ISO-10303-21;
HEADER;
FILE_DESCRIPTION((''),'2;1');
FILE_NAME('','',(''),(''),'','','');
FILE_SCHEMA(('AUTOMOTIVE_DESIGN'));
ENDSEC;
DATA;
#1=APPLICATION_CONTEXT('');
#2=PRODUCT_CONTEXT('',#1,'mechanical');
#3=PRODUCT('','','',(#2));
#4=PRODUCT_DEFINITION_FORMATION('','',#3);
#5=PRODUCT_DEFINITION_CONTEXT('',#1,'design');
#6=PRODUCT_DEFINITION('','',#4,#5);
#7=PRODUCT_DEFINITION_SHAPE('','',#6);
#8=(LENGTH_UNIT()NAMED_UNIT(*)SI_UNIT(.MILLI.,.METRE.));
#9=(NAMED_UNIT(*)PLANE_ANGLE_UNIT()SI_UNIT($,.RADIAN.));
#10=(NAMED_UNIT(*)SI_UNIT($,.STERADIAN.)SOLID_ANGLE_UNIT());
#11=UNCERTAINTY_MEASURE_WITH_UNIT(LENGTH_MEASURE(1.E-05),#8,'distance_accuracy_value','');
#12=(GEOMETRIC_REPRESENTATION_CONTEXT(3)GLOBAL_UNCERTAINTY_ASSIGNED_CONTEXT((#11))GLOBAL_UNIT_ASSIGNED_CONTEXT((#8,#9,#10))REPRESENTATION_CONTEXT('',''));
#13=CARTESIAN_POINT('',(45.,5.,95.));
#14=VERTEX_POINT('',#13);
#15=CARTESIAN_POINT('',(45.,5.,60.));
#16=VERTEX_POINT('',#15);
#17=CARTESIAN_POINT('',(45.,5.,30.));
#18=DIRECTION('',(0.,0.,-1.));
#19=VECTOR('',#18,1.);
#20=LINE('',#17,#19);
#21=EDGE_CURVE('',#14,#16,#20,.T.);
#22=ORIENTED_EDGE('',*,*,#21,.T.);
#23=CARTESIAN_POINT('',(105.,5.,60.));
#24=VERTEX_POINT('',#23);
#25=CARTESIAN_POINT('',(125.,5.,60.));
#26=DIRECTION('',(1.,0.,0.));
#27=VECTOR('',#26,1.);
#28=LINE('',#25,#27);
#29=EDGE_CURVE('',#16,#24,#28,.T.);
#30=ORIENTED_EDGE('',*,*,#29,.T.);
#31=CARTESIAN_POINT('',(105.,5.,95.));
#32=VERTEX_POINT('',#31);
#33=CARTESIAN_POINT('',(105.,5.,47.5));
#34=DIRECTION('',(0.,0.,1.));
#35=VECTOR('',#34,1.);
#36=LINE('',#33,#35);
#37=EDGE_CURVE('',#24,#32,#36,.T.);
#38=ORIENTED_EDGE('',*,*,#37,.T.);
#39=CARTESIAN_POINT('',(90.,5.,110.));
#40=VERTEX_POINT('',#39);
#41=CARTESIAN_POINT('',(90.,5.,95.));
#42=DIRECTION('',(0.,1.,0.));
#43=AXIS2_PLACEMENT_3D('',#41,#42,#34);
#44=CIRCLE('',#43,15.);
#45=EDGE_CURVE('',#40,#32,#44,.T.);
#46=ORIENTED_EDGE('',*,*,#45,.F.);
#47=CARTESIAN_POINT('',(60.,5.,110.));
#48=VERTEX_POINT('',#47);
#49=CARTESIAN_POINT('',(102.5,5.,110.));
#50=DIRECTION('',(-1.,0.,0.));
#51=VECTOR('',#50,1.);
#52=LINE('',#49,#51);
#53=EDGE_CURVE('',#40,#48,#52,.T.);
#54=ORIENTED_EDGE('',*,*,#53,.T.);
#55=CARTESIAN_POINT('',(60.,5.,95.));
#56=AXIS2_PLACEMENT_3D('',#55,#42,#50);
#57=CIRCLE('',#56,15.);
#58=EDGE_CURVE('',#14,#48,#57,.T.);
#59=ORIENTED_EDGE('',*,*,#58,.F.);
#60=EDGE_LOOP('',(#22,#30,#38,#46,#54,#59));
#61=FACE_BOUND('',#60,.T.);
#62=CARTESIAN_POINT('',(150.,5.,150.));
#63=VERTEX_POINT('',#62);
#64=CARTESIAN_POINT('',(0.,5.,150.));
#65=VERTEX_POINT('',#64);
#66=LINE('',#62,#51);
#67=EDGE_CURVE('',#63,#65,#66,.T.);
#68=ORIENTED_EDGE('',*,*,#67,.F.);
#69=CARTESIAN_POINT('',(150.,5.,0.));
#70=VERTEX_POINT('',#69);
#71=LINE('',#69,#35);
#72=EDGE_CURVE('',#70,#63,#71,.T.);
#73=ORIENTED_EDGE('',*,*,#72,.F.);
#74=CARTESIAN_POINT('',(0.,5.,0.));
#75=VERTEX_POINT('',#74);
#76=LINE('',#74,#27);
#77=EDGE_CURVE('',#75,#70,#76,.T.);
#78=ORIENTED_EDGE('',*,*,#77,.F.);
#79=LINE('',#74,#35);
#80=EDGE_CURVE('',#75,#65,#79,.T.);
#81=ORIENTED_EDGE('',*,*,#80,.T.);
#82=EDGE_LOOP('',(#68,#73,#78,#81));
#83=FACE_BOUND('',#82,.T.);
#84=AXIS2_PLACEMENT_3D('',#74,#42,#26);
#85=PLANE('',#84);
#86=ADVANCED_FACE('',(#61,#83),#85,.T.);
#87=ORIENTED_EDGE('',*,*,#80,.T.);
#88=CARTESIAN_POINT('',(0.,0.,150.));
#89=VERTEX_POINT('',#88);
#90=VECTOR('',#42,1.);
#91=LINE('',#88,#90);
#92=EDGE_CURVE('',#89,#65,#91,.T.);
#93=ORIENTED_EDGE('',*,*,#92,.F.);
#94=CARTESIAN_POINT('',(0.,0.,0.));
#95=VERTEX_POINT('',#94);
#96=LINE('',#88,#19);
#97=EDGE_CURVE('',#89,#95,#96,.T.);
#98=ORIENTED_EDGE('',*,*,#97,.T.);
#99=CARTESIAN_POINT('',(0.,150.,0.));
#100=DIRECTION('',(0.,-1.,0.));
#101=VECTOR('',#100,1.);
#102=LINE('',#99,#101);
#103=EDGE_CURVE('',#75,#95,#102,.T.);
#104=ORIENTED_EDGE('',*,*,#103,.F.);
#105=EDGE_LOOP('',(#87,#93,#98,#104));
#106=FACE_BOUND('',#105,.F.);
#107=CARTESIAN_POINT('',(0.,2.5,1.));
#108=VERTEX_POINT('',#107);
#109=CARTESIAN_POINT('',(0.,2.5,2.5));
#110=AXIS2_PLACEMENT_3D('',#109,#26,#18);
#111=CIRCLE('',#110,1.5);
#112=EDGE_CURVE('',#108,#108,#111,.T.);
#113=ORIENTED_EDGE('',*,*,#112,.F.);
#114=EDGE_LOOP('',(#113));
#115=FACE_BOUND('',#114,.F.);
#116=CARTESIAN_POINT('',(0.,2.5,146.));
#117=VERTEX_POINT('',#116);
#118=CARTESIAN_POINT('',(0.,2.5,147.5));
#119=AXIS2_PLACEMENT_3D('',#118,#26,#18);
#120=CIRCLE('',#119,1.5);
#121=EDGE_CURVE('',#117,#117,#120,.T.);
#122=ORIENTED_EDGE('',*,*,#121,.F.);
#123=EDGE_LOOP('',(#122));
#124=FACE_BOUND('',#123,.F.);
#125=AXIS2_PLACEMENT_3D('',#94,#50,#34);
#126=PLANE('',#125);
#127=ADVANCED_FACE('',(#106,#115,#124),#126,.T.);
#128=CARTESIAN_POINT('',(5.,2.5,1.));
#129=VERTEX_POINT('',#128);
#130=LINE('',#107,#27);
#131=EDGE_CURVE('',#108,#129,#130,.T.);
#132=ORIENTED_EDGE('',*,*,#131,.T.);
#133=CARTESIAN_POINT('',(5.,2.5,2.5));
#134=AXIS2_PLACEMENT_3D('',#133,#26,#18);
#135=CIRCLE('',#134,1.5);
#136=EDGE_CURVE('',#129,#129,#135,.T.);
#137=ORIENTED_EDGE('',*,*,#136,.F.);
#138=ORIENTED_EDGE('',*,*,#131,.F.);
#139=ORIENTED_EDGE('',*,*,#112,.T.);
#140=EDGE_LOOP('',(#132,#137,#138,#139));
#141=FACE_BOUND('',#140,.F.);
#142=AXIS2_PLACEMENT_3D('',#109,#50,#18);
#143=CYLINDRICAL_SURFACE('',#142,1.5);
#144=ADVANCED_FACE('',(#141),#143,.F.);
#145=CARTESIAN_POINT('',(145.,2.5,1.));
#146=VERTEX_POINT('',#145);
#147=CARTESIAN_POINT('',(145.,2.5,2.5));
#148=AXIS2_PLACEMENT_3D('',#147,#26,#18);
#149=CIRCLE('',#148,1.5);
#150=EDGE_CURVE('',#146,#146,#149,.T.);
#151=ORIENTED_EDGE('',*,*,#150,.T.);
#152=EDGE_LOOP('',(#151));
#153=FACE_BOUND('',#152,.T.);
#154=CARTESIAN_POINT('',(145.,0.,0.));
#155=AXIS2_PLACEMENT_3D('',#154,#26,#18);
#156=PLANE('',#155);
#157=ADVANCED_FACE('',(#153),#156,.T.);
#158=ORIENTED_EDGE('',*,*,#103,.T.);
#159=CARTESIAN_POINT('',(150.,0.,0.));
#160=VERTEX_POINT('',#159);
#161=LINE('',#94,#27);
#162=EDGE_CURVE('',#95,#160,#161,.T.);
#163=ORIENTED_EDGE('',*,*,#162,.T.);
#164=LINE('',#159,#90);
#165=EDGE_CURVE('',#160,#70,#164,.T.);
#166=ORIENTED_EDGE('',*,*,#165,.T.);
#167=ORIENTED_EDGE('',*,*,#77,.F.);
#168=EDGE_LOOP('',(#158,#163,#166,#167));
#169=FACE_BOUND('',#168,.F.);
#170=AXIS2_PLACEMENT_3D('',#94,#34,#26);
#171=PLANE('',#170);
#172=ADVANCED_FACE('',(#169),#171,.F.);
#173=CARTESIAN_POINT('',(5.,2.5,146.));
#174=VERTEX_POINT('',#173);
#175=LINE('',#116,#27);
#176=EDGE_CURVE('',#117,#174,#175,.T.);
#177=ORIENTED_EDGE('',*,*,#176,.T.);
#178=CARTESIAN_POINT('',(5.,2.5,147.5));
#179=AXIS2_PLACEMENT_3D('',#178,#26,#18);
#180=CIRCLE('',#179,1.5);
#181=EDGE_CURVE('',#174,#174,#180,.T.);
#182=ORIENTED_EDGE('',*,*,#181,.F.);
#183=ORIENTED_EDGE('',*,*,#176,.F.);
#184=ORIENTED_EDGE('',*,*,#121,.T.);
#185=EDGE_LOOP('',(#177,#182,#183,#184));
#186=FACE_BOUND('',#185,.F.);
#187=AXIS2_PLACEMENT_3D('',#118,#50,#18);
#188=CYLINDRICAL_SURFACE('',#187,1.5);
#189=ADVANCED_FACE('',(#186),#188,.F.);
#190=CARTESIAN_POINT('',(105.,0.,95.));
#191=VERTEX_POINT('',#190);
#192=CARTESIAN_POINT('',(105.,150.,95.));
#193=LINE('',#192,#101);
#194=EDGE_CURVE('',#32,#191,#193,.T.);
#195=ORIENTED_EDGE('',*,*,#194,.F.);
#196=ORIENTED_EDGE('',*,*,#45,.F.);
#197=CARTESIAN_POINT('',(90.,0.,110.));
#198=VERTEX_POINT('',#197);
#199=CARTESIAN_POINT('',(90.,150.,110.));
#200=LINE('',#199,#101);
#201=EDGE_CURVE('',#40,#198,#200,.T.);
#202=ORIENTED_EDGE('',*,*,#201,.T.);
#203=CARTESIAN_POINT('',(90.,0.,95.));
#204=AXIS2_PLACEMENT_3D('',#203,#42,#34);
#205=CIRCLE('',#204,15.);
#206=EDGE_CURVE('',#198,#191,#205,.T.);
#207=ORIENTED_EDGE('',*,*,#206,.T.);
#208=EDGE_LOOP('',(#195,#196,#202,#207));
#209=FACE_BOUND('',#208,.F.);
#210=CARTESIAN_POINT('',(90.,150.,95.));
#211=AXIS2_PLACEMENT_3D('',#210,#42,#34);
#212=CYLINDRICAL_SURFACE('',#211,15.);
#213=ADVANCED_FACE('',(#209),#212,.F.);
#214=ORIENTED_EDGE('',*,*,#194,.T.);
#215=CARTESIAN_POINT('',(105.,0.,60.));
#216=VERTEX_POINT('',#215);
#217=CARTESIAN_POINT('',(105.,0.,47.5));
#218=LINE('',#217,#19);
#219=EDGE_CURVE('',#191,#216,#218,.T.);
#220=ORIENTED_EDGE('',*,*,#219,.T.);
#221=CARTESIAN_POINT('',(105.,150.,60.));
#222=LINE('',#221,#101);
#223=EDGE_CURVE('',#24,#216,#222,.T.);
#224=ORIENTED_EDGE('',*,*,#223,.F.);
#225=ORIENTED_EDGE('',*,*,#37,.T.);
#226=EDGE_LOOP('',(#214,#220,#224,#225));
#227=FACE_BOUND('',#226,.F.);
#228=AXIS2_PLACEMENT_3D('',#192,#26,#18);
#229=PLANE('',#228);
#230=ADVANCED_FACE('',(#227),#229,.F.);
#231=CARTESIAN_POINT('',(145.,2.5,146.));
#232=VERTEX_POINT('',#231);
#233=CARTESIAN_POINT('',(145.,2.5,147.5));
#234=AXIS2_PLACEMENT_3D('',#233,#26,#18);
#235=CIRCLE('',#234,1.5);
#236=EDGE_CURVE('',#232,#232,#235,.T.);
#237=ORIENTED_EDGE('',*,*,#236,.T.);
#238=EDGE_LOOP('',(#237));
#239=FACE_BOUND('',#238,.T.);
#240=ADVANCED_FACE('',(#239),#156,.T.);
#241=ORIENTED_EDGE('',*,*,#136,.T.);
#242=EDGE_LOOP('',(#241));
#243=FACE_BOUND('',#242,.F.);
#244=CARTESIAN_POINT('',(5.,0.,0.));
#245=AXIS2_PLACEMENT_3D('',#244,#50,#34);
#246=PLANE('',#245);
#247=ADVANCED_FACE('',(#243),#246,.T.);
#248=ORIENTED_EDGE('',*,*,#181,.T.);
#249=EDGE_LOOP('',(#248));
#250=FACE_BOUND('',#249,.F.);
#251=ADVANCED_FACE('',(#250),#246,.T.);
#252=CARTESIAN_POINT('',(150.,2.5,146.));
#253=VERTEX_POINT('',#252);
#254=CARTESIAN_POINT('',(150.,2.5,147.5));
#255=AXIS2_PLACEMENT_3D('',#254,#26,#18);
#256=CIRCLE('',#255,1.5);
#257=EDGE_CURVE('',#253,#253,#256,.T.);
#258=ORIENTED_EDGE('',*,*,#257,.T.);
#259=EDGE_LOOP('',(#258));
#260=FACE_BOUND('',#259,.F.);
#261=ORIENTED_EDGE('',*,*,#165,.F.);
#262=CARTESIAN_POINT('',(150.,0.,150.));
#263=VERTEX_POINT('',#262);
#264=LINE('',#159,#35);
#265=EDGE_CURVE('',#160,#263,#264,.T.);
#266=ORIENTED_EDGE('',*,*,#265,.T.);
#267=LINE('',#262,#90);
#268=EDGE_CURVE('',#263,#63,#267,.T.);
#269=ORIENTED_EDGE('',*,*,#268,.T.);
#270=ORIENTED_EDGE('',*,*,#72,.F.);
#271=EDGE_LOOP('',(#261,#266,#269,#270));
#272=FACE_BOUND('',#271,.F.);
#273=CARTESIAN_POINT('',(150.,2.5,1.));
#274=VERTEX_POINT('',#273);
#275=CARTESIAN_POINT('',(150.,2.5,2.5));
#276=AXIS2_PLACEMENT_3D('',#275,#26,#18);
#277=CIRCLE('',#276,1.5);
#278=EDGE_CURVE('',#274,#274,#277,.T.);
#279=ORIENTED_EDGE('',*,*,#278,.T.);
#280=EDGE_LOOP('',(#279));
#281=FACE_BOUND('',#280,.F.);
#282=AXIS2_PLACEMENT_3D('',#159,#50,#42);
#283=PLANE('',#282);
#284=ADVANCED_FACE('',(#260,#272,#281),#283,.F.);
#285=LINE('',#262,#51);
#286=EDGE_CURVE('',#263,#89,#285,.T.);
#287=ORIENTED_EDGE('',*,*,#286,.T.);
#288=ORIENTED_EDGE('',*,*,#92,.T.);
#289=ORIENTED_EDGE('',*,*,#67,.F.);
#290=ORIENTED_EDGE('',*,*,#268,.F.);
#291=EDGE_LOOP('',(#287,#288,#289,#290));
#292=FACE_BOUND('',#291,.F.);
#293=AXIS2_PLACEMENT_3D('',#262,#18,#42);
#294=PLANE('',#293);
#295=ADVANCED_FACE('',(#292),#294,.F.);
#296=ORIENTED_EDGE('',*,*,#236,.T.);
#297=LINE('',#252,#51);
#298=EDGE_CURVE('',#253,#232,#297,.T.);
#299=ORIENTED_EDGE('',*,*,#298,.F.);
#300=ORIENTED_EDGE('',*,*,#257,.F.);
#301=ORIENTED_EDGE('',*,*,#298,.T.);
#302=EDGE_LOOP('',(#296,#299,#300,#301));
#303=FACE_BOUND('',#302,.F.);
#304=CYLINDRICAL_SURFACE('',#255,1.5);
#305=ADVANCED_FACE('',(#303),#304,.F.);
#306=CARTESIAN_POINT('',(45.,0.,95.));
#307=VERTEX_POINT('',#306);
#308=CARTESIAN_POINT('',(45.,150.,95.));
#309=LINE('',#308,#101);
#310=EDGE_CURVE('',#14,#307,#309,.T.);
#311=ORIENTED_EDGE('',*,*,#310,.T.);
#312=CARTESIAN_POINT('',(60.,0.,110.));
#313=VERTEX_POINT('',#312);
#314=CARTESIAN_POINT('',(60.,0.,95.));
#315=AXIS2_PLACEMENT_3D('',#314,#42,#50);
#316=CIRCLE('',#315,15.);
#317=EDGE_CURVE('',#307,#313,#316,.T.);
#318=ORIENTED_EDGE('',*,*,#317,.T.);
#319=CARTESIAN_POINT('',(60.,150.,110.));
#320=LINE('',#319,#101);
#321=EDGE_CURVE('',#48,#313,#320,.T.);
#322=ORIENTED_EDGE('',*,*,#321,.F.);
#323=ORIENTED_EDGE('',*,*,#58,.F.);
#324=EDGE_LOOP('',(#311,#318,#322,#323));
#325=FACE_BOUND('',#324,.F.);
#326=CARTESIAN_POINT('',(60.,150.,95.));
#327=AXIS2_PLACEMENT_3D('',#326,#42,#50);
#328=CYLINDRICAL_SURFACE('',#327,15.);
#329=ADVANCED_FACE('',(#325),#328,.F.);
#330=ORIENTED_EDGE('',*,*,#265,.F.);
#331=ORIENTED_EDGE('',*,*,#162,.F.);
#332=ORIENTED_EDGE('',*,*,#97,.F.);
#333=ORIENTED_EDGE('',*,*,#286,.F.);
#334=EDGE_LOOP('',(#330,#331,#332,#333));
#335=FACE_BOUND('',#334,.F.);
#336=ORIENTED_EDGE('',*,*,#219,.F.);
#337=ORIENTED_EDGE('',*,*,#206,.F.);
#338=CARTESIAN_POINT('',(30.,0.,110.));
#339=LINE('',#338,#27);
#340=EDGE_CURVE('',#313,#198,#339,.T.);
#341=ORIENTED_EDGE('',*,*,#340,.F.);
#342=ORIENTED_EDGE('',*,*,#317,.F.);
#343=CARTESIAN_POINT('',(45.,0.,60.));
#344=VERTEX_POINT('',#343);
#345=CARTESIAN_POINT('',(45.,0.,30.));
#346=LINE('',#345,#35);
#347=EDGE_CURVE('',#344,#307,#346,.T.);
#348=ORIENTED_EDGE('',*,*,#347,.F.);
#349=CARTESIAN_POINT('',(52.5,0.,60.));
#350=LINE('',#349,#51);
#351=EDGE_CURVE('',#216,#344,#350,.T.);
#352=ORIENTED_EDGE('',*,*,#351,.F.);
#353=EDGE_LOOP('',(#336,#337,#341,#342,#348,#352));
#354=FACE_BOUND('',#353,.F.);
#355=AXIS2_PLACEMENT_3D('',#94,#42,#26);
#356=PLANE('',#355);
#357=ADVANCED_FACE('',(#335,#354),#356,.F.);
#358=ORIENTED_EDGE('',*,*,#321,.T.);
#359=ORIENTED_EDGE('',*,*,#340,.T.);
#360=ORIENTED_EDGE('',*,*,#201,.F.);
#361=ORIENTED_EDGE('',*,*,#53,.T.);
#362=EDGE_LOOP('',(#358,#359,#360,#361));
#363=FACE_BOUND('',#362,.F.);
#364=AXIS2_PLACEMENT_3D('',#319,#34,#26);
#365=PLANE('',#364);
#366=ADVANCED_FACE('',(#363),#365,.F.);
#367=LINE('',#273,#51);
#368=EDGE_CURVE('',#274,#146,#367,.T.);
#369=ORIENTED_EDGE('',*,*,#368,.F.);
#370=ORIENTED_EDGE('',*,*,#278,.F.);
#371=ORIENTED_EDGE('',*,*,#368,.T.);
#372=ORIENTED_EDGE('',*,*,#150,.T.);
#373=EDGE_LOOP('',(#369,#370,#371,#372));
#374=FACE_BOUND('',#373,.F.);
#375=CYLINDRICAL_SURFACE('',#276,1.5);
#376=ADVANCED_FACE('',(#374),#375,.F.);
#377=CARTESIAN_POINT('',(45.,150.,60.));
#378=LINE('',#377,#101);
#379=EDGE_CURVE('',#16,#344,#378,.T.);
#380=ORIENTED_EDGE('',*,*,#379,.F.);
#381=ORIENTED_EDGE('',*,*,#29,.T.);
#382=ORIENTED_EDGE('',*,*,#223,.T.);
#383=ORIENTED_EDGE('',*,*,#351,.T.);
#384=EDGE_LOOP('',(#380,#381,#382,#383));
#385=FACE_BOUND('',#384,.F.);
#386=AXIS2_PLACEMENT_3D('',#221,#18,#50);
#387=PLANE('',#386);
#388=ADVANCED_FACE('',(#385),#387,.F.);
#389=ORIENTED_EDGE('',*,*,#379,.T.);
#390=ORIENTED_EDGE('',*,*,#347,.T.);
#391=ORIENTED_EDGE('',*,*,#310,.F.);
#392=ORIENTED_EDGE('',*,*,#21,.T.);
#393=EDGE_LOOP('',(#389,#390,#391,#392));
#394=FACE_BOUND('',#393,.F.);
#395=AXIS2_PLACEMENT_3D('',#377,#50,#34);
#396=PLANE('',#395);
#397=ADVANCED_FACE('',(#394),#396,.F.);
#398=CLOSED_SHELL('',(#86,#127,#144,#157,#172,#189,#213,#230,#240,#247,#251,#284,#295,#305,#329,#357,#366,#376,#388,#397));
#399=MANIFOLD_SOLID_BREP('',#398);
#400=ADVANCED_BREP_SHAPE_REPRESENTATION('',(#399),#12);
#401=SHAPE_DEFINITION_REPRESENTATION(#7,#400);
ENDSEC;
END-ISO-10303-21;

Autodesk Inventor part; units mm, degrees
sketch "Boceto1" plane through (0, 0, 0) normal (0, 0, 1) x (1, 0, 0)
  line L0 (0, 0) -> (150, 0)
  line L1 (150, 0) -> (150, 150)
  line L2 (150, 150) -> (0, 150)
  line L3 (0, 150) -> (0, 0)
  line L4 (5, 145) -> (145, 145)
  line L5 (145, 145) -> (145, 5)
  line L6 (145, 5) -> (5, 5)
  line L7 (5, 5) -> (5, 145)
  dimension "d0" = 150
  dimension "d1" = 150
  dimension "d2" = 5
extrude "Extrusión1" add sketch "Boceto1" along normal blind 150
sketch "Boceto2" plane through (150, 0, 0) normal (1, 0, 0) x (0, 0, -1)
  line L0 (-150, 0) -> (-150, 150) projected
  line L1 (-150, 75) -> (-190, 75) construction
  line L2 (-190, 75) -> (-150, 150)
  line L3 (0, 0) -> (-150, 0) construction
  line L4 (-150, 0) -> (-190, 75)
  dimension "d5" = 40
extrude "Extrusión2" add sketch "Boceto2" against normal blind 5
ref_plane "Plano de trabajo1" through (75, 0, 0) normal (1, 0, 0) x (0, 0, -1)
mirror "Simetría1" about plane through (75, 0, 0) normal (1, 0, 0) of "Extrusión2"
sketch "Boceto3" plane through (0, 150, 0) normal (0, 1, 0) x (1, 0, 0)
  line L0 (105, -60) -> (45, -60)
  line L1 (45, -60) -> (45, -95)
  line L2 (60, -110) -> (90, -110)
  line L3 (105, -95) -> (105, -60)
  line L4 (150, 0) -> (0, 0) projected
  line L5 (145, -150) -> (5, -150) projected
  arc A0 (90, -110) -> (105, -95) centre (90, -95) ccw
  arc A1 (45, -95) -> (60, -110) centre (60, -95) ccw
  point P0 (45, -110)
  point P1 (105, -110)
  point P2 (75, -60)
  point P3 (75, 0)
  dimension "d8" = 60
  dimension "d9" = 50
  dimension "d10" = 40
  dimension "d11" = 15
extrude "Extrusión3" cut sketch "Boceto3" against normal through all
sketch "Boceto4" plane through (150, 0, 0) normal (1, 0, 0) x (0, 0, -1)
  line L0 (-13, 20) -> (-123, 20)
  line L1 (-128, 25) -> (-128, 75)
  line L2 (-123, 80) -> (-13, 80)
  line L3 (-8, 75) -> (-8, 25)
  line L4 (0, 0) -> (0, 150) projected
  line L5 (0, 0) -> (-150, 0) projected
  arc A0 (-123, 80) -> (-128, 75) centre (-123, 75) ccw
  arc A1 (-8, 75) -> (-13, 80) centre (-13, 75) ccw
  arc A2 (-13, 20) -> (-8, 25) centre (-13, 25) ccw
  arc A3 (-128, 25) -> (-123, 20) centre (-123, 25) ccw
  point P0 (-128, 80)
  point P1 (-128, 20)
  point P2 (-8, 80)
  dimension "d14" = 120
  dimension "d15" = 60
  dimension "d16" = 8
  dimension "d17" = 20
  dimension "d18" = 5
extrude "Extrusión4" cut sketch "Boceto4" against normal up to surface (5 mm away)
sketch "Boceto5" plane through (0, 0, 0) normal (-1, 0, 0) x (0, 0, 1)
  line L0 (65, 125) -> (115, 125)
  line L1 (120, 120) -> (120, 30)
  line L2 (115, 25) -> (65, 25)
  line L3 (60, 30) -> (60, 120)
  line L4 (0, 150) -> (0, 0) projected
  arc A0 (120, 120) -> (115, 125) centre (115, 120) ccw
  arc A1 (115, 25) -> (120, 30) centre (115, 30) ccw
  arc A2 (65, 125) -> (60, 120) centre (65, 120) ccw
  arc A3 (60, 30) -> (65, 25) centre (65, 30) ccw
  point P0 (60, 150)
  point P1 (120, 25)
  point P2 (120, 125)
  point P3 (60, 25)
  point P4 (60, 75)
  point P5 (0, 75)
  dimension "d21" = 60
  dimension "d22" = 100
  dimension "d23" = 60
  dimension "d24" = 5
extrude "Extrusión5" cut sketch "Boceto5" against normal blind 10
sketch "Boceto6" plane through (150, 0, 0) normal (1, 0, 0) x (0, 0, -1)
  line L0 (-190, 75) -> (-150, 0) projected
  line L1 (-150, 150) -> (-190, 75) projected
  line L2 (-154.4118, 152.3529) -> (-195.6667, 75)
  line L3 (-195.6667, 75) -> (-154.4118, -2.3529)
  line L4 (-154.4118, 152.3529) -> (-144.4118, 152.3529)
  line L5 (-144.4118, 152.3529) -> (-144.4118, 150)
  line L6 (-154.4118, -2.3529) -> (-144.4118, -2.3529)
  line L7 (-144.4118, -2.3529) -> (-144.4118, 0)
  line L8 (0, 0) -> (-150, 0) projected
  line L9 (0, 150) -> (-150, 150) projected
  dimension "d27" = 5
  dimension "d28" = 10
extrude "Extrusión6" add sketch "Boceto6" along normal blind 10 and the other way blind 160
fillet "Empalme1" radius 5 3 edges at (75, 152.3529, 154.4118) (75, 75, 195.6667) (75, -2.3529, 154.4118)
sketch "Boceto7" plane through (150, 25, 8) normal (0, 0, 1) x (1, 0, 0)
  circle A0 centre (-2.5, 2.5) radius 1.25
  line L0 (0, 50) -> (0, 0) projected
  line L1 (0, 0) -> (-5, 0) projected
  point P0 (-150, -25)
  point P1 (-2.5, 0)
  dimension "d34" = 2.5
  dimension "d35" = 2.5
  dimension "d36" = 2.5
extrude "Extrusión7" cut sketch "Boceto7" against normal blind 3
ref_plane "Plano de trabajo2" through (150, 25, 68) normal (0, 0, 1) x (1, 0, 0)
mirror "Simetría2" about plane through (150, 25, 68) normal (0, 0, 1) of "Extrusión7"
sketch "Boceto8" plane through (160, 0, 0) normal (1, 0, 0) x (0, 0, -1)
  arc A0 (-155.8235, 0.2941) -> (-151.4118, -2.3529) centre (-151.4118, 2.6471) ccw projected
  line L0 (-151.4118, -2.3529) -> (-144.4118, -2.3529) projected
  line L1 (-144.4118, -2.3529) -> (-144.4118, 0) projected
  line L2 (-144.4118, 0) -> (-150, 0) projected
  line L3 (-150, 0) -> (-190, 75) projected
  line L4 (-190, 75) -> (-150, 150) projected
  line L5 (-150, 150) -> (-144.4118, 150) projected
  line L6 (-144.4118, 150) -> (-144.4118, 152.3529) projected
  line L7 (-144.4118, 152.3529) -> (-151.4118, 152.3529) projected
  arc A1 (-151.4118, 152.3529) -> (-155.8235, 149.7059) centre (-151.4118, 147.3529) ccw projected
  line L8 (-155.8235, 149.7059) -> (-194.4118, 77.3529) projected
  arc A2 (-194.4118, 77.3529) -> (-194.4118, 72.6471) centre (-190, 75) ccw projected
  line L9 (-194.4118, 72.6471) -> (-155.8235, 0.2941) projected
  point P0 (0, 0)
extrude "Extrusión8" cut sketch "Boceto8" against normal through all
sketch "Boceto9" plane through (145, 0, 150) normal (0, -0.4705882, 0.8823529) x (1, 0, 0)
  circle A0 centre (2.5, 2.5) radius 1.5
  line L0 (5, 85) -> (5, 0) projected
  line L1 (5, 0) -> (0, 0) projected
  point P0 (-145, -70.5882)
  dimension "d41" = 3
  dimension "d42" = 2.5
  dimension "d43" = 2.5
ref_plane "Plano de trabajo3" through (75, 0, 0) normal (1, 0, 0) x (0, 0, -1)
ref_plane "Plano de trabajo4" through (0, 75, 0) normal (0, -1, 0) x (1, 0, 0)
mirror "Simetría4" about plane through (0, 75, 0) normal (0, -1, 0) of "Extrusión8"
sketch "Boceto10" plane through (0, 150, 0) normal (0, 1, 0) x (1, 0, 0)
  line L0 (5, -115) -> (5, -65) projected
  arc A0 (45, -95) -> (60, -110) centre (60, -95) ccw projected
  line L1 (45, -95) -> (45, -60) projected
  line L2 (45, -60) -> (105, -60) projected
  line L3 (105, -60) -> (105, -95) projected
  arc A1 (90, -110) -> (105, -95) centre (90, -95) ccw projected
  line L4 (90, -110) -> (60, -110) projected
  line L5 (150, 0) -> (150, -150) projected
  line L6 (150, 0) -> (0, 0) projected
  line L7 (0, 0) -> (0, -150) projected
  line L8 (5, -150) -> (0, -150) projected
  line L9 (145, -150) -> (5, -150) projected
  line L10 (150, -150) -> (145, -150) projected
extrude "Extrusión10" cut sketch "Boceto10" against normal up to surface (145 mm away)
sketch "Boceto11" plane through (150, 0, 150) normal (1, 0, 0) x (0, 0, -1)
  line L0 (0, 0) -> (0, 5) projected
  line L1 (0, 5) -> (0, 150) projected
  line L2 (-40, 75) -> (0, 0) projected
  line L3 (0, 150) -> (-40, 75) projected
  point P0 (150, 0)
extrude "Extrusión11" cut sketch "Boceto11" against normal through all
sketch "Boceto12" plane through (150, 0, 0) normal (1, 0, 0) x (0, 0, -1)
  circle A0 centre (-147.5, 2.5) radius 1.5
  line L0 (0, 5) -> (-150, 5) projected
  line L1 (-150, 5) -> (-150, 0) projected
  line L2 (-75, 5) -> (-75, -25.1445) construction
  circle A1 centre (-2.5, 2.5) radius 1.5
  point P0 (0, 0)
  dimension "d50" = 3
  dimension "d51" = 2.5
  dimension "d52" = 2.5
extrude "Extrusión12" cut sketch "Boceto12" against normal blind 5
mirror "Simetría5" about plane through (75, 0, 0) normal (1, 0, 0) of "Extrusión12"
properties part number "CasaJugueteAPM" material "Plástico ABS"
